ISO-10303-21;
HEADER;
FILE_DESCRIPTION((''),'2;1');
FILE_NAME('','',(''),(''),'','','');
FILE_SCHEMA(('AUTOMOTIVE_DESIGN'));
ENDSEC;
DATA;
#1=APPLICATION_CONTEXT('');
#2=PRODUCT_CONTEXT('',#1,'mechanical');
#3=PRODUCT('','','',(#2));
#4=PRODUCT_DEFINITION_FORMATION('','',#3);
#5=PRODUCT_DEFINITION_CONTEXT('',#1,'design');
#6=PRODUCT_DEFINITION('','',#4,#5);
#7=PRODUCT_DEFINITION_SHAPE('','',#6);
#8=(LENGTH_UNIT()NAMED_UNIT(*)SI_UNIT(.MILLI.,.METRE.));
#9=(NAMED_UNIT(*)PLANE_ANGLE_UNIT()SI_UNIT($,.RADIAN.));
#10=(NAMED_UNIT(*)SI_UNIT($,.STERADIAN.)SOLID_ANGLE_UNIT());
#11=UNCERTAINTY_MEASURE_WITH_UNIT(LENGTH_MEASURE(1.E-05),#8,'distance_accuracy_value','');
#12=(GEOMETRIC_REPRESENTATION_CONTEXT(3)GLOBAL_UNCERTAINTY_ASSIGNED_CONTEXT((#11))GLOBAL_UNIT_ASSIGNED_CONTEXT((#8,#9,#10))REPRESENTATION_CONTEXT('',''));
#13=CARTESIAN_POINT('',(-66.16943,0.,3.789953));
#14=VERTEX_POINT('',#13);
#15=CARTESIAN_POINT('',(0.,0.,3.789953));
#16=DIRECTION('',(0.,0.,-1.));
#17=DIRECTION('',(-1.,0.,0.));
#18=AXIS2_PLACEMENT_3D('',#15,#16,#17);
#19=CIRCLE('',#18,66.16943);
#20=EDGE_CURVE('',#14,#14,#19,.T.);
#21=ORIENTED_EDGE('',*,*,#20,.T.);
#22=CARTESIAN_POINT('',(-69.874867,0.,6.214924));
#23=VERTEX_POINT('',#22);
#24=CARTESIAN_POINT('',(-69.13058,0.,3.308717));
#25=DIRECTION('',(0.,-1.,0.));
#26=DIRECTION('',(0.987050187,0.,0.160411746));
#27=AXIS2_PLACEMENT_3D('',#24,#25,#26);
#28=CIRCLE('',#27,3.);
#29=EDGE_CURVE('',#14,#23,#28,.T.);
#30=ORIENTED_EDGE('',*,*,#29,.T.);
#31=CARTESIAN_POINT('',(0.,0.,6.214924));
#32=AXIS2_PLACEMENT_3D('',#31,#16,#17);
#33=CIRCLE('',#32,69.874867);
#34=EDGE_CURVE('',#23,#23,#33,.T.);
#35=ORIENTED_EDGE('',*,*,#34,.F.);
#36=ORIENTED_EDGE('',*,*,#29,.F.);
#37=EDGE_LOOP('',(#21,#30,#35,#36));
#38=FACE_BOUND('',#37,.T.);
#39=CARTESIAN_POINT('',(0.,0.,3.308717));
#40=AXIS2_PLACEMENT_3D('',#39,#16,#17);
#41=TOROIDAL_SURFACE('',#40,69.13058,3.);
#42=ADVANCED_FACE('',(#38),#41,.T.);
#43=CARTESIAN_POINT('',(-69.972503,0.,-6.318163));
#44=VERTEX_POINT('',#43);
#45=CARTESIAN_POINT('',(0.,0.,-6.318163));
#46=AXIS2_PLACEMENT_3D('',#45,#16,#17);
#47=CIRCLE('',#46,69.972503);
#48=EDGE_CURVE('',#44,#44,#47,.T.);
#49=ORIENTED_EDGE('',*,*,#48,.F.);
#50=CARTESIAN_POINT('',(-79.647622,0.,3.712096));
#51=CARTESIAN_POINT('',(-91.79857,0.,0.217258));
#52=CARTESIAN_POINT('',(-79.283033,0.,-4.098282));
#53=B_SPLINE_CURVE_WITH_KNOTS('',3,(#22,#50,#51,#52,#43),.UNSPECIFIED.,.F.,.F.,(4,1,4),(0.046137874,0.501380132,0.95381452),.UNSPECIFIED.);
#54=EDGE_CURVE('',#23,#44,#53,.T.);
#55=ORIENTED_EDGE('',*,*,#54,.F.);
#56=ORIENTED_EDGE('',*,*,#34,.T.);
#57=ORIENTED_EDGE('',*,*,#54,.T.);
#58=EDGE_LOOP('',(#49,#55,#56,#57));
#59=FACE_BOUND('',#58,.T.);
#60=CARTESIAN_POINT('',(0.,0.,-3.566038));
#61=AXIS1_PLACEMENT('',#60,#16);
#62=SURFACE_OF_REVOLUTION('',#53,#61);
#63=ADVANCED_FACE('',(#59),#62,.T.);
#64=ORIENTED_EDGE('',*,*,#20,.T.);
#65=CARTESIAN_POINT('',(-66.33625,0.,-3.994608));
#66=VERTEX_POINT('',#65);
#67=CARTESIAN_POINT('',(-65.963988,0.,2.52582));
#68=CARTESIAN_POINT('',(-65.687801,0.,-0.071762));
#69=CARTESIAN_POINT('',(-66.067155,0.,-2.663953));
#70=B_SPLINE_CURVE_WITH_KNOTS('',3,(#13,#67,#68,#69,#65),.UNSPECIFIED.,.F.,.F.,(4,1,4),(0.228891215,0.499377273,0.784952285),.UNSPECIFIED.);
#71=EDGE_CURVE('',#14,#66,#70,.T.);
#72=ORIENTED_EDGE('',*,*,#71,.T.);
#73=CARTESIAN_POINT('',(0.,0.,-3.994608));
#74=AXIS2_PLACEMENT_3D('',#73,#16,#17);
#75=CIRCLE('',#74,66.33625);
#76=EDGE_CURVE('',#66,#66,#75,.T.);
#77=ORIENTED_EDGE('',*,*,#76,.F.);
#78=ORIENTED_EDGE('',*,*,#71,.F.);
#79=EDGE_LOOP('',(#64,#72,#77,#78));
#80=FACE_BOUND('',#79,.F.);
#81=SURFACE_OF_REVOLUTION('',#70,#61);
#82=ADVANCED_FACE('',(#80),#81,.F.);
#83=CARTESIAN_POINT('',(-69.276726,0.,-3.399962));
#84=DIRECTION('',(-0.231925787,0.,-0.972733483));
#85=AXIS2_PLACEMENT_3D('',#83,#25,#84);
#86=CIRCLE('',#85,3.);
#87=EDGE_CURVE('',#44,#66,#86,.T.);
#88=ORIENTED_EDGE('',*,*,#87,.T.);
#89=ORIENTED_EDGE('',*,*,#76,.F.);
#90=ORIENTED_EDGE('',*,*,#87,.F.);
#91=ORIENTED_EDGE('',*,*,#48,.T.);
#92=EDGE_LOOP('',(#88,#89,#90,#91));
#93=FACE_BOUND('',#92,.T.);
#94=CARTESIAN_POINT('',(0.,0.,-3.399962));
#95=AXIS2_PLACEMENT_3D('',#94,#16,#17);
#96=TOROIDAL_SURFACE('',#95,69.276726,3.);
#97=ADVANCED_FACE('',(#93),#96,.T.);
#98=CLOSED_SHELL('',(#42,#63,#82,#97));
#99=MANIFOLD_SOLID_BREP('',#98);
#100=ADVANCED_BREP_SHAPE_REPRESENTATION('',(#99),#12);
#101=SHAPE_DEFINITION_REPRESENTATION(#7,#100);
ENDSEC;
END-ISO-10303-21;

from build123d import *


with BuildPart() as f2:
    # F1 (on Front) → F2 (revolve)
    with BuildSketch(Plane.XZ):
        with BuildLine():
            ThreePointArc((-66.1694296572, 3.789952672), (-67.4877952478, 5.8189480082), (-69.8748672823, 6.2149240268))
            add(Edge.make_bspline(
                [(-69.8748672823, 6.2149240268), (-79.6476224624, 3.7120960185), (-91.7985698992, 0.2172583079), (-79.2830328431, -4.0982824608), (-69.9725030476, -6.3181628118)],
                knots=[0.0461378742, 0.0461378742, 0.0461378742, 0.0461378742, 0.5013801316, 0.9538145198, 0.9538145198, 0.9538145198, 0.9538145198], degree=3))
            ThreePointArc((-69.9725030476, -6.3181628118), (-67.6613636276, -5.9279270401), (-66.3362500715, -3.9946077598))
            add(Edge.make_bspline(
                [(-66.1694296572, 3.789952672), (-65.9639875018, 2.5258200721), (-65.6878006976, -0.0717621899), (-66.0671549323, -2.663953057), (-66.3362500715, -3.9946077598)],
                knots=[0.2288912147, 0.2288912147, 0.2288912147, 0.2288912147, 0.4993772734, 0.7849522853, 0.7849522853, 0.7849522853, 0.7849522853], degree=3))
        make_face()
    revolve(axis=Axis((0, 0, -3.5660378635), (0, 0, -1)))


solid = f2.part
